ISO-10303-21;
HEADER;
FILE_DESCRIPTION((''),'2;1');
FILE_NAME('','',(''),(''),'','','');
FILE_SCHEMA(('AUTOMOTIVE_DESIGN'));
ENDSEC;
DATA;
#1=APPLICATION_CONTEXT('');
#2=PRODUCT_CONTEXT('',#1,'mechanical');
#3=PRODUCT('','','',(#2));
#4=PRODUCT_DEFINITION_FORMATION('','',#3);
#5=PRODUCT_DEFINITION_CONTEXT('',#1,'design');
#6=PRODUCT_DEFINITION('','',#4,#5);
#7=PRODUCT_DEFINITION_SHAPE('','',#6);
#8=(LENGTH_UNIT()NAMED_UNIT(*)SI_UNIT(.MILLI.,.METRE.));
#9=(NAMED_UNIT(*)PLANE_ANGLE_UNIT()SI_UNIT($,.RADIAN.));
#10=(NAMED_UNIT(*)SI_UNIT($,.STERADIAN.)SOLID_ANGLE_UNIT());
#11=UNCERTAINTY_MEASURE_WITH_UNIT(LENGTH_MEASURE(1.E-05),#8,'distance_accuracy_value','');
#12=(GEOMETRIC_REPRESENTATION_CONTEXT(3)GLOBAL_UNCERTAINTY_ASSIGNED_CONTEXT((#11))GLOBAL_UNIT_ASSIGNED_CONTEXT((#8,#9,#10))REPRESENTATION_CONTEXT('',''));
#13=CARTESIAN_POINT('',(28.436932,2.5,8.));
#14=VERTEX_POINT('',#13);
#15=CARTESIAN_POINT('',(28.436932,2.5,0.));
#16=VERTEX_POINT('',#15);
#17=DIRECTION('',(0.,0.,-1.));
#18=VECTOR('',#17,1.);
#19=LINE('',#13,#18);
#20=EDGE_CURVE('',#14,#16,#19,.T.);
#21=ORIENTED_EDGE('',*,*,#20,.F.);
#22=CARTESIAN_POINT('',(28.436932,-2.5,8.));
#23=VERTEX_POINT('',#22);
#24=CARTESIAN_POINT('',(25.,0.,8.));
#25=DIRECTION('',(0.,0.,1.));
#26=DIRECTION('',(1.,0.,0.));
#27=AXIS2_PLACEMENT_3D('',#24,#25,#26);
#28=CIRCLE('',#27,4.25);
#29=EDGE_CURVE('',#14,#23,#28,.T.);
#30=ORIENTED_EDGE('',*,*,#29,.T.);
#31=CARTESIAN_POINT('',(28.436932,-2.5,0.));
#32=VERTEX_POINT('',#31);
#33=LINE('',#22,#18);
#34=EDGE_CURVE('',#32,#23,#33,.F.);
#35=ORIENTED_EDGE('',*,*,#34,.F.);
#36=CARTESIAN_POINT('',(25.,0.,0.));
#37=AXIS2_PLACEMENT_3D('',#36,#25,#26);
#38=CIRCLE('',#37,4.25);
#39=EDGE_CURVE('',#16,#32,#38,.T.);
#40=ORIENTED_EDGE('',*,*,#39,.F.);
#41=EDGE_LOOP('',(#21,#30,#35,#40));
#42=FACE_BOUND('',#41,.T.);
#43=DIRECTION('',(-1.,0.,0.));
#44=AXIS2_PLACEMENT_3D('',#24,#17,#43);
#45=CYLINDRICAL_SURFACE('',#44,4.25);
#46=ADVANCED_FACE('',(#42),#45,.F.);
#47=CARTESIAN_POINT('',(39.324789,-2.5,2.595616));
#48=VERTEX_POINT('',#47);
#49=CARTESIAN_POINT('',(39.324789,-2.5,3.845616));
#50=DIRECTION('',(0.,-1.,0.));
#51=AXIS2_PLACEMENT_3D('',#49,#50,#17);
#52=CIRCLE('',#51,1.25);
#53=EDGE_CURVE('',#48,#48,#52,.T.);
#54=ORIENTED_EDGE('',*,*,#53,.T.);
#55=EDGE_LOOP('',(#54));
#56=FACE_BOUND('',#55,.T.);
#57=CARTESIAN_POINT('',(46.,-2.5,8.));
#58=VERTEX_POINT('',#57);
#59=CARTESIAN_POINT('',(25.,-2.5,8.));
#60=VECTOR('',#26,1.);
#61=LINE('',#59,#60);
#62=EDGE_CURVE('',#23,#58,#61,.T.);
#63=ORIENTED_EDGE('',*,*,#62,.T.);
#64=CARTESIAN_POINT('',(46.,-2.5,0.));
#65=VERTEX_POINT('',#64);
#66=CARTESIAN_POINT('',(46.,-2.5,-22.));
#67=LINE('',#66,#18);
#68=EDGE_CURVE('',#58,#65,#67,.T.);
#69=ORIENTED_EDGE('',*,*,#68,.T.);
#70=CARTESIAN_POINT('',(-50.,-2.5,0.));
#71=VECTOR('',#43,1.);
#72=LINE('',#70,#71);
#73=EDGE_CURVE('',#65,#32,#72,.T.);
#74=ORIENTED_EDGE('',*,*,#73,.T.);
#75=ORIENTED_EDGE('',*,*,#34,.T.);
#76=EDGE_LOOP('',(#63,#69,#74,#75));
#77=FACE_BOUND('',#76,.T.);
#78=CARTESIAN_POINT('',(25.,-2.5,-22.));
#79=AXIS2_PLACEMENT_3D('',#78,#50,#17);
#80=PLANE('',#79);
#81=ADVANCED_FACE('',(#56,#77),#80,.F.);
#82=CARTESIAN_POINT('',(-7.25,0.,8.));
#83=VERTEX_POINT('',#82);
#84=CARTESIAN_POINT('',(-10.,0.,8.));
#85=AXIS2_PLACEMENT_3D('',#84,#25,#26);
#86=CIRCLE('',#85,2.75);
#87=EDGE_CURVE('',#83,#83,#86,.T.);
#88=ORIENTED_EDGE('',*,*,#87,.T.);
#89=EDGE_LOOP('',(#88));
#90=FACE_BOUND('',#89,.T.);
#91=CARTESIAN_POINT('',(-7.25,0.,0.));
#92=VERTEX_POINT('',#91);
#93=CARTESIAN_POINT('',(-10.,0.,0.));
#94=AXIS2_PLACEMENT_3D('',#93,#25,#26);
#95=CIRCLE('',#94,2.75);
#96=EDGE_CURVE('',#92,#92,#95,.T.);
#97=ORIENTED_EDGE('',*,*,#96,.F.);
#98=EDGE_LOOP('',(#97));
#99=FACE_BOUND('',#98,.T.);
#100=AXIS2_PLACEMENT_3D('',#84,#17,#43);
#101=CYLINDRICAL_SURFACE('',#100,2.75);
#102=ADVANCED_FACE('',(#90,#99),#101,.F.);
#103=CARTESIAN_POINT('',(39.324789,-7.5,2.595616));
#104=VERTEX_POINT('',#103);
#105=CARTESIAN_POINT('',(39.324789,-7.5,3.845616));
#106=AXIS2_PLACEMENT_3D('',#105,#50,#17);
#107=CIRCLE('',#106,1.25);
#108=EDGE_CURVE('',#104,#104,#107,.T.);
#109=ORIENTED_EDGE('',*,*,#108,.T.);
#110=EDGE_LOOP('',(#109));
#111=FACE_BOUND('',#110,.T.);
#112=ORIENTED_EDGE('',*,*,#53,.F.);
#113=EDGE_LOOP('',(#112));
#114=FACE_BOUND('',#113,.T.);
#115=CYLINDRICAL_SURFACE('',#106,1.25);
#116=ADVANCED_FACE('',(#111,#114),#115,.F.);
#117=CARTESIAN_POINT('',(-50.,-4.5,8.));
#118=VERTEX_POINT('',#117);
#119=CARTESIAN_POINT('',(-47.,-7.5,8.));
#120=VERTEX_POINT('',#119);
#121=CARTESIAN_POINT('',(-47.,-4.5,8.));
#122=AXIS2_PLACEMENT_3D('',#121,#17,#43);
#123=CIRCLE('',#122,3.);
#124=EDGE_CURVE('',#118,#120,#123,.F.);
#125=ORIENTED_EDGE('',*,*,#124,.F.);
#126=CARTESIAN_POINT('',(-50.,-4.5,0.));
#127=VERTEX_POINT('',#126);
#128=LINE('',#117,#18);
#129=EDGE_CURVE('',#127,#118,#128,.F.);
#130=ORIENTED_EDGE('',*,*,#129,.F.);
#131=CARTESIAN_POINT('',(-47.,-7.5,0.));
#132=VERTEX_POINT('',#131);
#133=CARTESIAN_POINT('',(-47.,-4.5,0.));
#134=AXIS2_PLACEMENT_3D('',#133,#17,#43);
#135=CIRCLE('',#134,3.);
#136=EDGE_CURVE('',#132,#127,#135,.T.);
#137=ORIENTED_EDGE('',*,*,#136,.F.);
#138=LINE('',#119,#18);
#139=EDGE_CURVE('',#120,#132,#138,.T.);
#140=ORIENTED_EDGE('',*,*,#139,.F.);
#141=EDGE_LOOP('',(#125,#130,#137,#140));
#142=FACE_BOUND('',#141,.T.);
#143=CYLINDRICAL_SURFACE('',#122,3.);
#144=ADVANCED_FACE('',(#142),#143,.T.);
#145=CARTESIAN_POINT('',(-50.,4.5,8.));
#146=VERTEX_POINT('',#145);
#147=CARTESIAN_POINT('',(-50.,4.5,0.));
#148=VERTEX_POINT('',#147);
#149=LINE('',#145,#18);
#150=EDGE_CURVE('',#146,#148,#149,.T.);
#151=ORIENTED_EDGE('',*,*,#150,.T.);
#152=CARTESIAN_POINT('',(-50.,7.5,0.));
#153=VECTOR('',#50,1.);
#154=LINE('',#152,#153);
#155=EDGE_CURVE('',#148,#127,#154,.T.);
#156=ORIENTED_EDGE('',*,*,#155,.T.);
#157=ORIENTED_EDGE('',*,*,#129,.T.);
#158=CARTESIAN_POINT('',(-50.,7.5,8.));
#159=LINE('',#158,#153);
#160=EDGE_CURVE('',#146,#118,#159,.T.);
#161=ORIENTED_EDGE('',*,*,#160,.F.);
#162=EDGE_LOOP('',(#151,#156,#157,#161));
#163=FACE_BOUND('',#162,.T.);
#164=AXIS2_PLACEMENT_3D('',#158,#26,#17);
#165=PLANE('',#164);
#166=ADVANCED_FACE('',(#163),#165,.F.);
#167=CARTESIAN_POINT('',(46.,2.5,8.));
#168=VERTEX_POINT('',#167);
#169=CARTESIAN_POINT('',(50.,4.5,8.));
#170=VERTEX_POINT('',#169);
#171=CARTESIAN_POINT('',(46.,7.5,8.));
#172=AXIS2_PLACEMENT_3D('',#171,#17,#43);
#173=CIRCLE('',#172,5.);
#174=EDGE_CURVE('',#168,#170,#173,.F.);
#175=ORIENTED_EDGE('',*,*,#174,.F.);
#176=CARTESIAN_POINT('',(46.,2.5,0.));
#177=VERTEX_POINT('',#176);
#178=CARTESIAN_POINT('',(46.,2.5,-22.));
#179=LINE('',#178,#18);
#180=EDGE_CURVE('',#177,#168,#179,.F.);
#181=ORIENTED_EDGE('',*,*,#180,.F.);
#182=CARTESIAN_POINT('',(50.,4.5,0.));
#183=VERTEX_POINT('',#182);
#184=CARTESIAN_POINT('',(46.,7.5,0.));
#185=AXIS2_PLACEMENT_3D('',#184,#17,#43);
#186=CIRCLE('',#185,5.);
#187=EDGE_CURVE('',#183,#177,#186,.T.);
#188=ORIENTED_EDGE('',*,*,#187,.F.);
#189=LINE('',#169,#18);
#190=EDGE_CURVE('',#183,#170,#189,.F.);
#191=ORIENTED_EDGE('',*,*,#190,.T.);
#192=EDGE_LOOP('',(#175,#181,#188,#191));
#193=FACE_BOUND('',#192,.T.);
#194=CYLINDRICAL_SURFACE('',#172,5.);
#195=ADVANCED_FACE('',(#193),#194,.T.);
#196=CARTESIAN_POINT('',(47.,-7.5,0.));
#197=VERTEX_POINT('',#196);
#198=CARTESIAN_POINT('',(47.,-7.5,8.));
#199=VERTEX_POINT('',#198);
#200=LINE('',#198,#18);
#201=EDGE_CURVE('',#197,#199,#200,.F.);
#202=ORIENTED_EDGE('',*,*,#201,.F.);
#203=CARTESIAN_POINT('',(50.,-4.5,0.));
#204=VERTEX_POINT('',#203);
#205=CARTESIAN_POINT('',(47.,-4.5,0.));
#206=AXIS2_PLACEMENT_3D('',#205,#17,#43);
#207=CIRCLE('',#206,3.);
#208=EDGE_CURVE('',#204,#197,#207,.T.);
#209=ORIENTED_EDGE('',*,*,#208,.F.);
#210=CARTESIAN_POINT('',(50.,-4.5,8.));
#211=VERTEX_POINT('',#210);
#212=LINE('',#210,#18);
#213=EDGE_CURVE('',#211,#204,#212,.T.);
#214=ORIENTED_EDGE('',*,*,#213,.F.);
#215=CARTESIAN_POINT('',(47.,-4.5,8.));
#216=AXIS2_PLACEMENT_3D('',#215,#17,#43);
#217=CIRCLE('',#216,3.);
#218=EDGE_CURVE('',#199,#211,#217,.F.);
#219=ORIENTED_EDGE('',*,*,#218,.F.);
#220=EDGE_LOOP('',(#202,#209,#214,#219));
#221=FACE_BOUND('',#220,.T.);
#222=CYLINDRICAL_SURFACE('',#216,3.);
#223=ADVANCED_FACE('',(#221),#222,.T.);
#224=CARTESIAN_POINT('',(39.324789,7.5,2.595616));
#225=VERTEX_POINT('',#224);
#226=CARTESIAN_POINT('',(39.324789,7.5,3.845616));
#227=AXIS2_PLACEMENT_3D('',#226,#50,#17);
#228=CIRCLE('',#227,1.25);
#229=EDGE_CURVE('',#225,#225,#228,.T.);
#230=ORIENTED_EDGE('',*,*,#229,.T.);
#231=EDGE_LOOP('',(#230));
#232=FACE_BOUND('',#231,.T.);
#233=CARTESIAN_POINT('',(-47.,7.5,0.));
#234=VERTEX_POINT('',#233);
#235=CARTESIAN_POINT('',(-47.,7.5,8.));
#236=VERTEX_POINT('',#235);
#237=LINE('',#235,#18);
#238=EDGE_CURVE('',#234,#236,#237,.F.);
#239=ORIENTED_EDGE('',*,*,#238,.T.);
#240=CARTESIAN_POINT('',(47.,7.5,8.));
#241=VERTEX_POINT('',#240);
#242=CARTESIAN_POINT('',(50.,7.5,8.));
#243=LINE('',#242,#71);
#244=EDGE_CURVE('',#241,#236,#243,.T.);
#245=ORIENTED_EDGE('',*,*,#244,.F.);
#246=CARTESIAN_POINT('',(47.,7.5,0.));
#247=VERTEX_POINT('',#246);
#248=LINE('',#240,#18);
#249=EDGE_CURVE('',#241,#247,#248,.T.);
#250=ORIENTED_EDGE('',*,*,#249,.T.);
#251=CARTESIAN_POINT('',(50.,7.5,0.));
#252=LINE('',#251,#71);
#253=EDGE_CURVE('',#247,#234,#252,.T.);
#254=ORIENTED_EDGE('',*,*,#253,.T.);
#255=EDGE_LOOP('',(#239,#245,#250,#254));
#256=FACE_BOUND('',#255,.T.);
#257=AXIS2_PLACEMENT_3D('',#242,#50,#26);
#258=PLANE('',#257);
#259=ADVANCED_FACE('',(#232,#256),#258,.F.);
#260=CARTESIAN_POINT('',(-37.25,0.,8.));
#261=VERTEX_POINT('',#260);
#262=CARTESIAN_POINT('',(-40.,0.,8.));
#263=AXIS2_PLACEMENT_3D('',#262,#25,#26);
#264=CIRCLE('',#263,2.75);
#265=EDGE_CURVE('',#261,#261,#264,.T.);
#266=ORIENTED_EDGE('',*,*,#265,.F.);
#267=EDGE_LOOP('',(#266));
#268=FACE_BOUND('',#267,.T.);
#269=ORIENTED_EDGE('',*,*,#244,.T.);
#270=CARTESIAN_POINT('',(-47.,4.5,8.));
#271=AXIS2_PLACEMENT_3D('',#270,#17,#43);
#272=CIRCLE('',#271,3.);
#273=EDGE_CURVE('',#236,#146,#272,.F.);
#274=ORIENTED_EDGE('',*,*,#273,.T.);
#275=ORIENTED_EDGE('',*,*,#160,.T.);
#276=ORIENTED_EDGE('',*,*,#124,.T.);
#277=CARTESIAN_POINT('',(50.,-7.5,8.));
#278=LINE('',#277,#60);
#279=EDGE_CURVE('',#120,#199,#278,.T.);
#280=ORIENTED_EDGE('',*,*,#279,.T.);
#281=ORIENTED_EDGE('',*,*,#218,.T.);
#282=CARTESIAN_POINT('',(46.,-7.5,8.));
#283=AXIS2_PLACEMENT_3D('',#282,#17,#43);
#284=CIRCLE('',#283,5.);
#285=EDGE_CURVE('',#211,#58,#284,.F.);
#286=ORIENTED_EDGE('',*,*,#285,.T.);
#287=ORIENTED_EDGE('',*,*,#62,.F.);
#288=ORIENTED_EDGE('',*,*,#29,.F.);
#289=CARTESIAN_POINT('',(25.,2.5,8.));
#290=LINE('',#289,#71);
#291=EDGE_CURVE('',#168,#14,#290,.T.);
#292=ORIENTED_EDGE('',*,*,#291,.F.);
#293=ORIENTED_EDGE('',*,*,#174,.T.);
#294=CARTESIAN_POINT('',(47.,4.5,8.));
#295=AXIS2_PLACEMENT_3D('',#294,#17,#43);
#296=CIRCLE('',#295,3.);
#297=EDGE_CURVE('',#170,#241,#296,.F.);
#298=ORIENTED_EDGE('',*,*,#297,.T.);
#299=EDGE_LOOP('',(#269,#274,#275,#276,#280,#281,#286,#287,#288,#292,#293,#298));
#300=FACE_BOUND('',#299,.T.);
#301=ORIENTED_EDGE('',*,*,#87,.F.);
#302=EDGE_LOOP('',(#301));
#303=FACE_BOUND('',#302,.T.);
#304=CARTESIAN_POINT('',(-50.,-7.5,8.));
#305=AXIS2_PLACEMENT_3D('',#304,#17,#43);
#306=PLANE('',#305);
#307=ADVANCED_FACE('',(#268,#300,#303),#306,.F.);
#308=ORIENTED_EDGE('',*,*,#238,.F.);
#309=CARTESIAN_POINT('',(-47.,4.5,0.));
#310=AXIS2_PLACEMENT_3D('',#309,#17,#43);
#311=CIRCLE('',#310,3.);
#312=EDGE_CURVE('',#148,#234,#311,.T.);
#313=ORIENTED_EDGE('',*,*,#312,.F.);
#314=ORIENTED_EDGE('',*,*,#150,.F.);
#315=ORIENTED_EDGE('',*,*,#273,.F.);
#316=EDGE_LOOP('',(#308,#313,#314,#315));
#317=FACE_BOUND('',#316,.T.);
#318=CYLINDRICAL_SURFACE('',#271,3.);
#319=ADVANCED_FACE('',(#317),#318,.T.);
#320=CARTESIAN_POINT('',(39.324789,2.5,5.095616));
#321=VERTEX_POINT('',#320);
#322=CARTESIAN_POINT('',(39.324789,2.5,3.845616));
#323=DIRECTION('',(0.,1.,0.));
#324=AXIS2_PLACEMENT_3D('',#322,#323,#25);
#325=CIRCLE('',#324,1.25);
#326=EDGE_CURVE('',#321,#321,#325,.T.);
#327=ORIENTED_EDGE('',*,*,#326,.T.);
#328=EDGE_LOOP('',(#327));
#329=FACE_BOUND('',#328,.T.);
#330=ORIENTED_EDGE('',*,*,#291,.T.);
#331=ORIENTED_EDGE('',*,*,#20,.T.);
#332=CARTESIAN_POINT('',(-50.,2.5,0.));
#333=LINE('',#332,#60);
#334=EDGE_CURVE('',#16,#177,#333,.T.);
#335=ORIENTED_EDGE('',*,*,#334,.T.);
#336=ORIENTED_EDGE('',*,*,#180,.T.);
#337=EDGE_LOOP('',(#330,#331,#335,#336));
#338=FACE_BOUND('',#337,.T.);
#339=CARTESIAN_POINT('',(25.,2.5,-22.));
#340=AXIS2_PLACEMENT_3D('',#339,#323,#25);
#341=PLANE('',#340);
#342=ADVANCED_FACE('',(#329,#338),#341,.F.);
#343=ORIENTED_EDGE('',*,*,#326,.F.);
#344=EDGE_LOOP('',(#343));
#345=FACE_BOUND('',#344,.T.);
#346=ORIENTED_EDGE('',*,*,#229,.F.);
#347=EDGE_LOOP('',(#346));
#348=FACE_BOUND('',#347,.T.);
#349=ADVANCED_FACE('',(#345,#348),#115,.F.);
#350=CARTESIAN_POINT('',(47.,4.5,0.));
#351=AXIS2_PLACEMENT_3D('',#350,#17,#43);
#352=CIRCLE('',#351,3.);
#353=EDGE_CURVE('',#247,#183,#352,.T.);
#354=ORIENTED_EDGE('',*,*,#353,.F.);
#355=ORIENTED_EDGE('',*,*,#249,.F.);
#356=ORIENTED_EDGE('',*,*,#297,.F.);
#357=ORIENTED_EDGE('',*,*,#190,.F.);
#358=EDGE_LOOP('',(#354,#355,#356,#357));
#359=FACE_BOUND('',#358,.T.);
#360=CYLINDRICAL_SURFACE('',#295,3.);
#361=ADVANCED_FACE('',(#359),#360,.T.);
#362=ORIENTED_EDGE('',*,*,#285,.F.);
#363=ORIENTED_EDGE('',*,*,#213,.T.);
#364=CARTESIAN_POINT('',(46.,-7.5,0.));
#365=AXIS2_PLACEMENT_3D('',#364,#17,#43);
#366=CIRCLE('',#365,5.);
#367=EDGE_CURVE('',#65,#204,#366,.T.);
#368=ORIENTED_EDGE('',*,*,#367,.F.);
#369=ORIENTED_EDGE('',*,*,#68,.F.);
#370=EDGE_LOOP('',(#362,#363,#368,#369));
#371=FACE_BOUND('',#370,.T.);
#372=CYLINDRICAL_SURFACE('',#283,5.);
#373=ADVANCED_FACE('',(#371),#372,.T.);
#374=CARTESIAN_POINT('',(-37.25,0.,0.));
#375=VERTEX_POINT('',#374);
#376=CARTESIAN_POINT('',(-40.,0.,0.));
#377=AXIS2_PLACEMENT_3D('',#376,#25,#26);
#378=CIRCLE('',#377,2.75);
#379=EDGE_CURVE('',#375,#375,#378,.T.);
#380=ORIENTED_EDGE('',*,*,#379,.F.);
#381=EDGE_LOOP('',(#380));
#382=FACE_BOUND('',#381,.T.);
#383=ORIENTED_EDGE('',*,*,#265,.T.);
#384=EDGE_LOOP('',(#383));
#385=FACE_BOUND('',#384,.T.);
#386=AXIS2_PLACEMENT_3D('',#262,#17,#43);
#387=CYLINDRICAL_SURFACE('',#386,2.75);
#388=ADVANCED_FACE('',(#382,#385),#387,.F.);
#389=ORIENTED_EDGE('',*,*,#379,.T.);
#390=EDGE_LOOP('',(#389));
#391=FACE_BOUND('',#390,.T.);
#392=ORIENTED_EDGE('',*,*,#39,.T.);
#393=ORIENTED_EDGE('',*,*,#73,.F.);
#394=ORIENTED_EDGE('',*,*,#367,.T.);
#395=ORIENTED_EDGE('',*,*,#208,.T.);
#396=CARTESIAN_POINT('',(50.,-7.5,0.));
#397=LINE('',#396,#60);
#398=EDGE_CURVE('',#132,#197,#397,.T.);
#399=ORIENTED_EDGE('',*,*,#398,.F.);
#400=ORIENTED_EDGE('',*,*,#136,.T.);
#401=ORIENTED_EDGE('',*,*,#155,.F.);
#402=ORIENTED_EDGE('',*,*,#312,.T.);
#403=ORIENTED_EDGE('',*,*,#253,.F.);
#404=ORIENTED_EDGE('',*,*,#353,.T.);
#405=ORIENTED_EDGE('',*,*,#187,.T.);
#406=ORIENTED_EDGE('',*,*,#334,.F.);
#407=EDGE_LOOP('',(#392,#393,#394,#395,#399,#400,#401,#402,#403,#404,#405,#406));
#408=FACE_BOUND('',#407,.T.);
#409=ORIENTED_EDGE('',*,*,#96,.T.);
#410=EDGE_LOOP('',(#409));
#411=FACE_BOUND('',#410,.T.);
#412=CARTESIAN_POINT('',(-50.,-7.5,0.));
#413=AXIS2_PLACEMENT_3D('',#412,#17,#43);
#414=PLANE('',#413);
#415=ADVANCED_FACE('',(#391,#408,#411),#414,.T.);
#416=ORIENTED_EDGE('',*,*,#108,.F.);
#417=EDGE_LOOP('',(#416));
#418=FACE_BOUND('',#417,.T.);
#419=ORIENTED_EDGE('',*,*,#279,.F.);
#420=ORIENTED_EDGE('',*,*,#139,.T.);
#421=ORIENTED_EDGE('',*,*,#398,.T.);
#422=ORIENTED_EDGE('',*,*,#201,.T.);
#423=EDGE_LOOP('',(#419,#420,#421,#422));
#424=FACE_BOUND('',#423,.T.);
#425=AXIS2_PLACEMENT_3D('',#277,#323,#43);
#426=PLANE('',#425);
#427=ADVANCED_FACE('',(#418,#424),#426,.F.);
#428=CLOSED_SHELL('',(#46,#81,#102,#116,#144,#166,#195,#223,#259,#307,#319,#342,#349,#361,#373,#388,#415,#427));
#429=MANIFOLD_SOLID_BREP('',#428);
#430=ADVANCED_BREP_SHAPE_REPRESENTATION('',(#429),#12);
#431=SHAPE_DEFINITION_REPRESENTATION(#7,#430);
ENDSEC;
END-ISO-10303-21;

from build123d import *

# Parameters (mm, degrees)
SKIZZE1_W                       = 100
SKIZZE1_H                       = 15
SKIZZE1_R                       = 2.75
SKIZZE1_R_2                     = 4.25
AUFSATZ_LINEAR_AUSTRAGEN1_DEPTH = 8
VERRUNDUNG1_R                   = 3
SCHNITT_LINEAR_AUSTRAGEN1_DEPTH = 30
M3_GEWINDEBOHRUNG1_D            = 2.5
VERRUNDUNG2_R                   = 5


with BuildPart() as part:
    # Skizze1 → Aufsatz-Linear austragen1 (new body)
    with BuildSketch(Plane.XY):
        Rectangle(SKIZZE1_W, SKIZZE1_H)
        with Locations((-10, 0)):
            Circle(SKIZZE1_R, mode=Mode.SUBTRACT)
        with Locations((-40, 0)):
            Circle(SKIZZE1_R, mode=Mode.SUBTRACT)
        with Locations((25, 0)):
            Circle(SKIZZE1_R_2, mode=Mode.SUBTRACT)
    extrude(amount=AUFSATZ_LINEAR_AUSTRAGEN1_DEPTH)

    # Verrundung1
    verrundung1_edges = [part.edges().sort_by_distance(p)[0] for p in [
        (-50, 7.5, 4),
        (50, 7.5, 4),
        (50, -7.5, 4),
        (-50, -7.5, 4),
    ]]
    fillet(verrundung1_edges, radius=VERRUNDUNG1_R)

    # Skizze2 → Schnitt-Linear austragen1 (cut)
    with BuildSketch(Plane.XY.offset(8)):
        with BuildLine():
            Line((25, 2.5), (52.731650319, 2.5))
            ThreePointArc((52.731650319, 2.5), (55.231650319, 0), (52.731650319, -2.5))
            Line((52.731650319, -2.5), (25, -2.5))
            ThreePointArc((25, -2.5), (22.5, 0), (25, 2.5))
        make_face()
    extrude(amount=-SCHNITT_LINEAR_AUSTRAGEN1_DEPTH, mode=Mode.SUBTRACT)

    # M3 Gewindebohrung1 (through all)
    with Locations(Plane.XZ.offset(7.5)):
        with Locations((39.324789102, 3.845615986)):
            Hole(M3_GEWINDEBOHRUNG1_D / 2)

    # Verrundung2
    # the kernel refuses this fillet: 5 mm, written as the material it takes off along each edge
    with BuildSketch(Plane(origin=(50, -2.5, 18), x_dir=(-1, 0, 0), z_dir=(0, 0, -1))) as verrundung2_piece_1:
        with BuildLine():
            CenterArc((4, -5), VERRUNDUNG2_R, 90, 53.130102354)
            Line((0, -2), (-0.08, -1.94))
            ThreePointArc((-0.08, -1.94), (-0.1, -1), (-0.1, 0))
            Line((-0.1, 0), (0, 0.1))
            Line((0, 0.1), (4, 0.1))
            Line((4, 0.1), (4, 0))
        make_face()
    extrude(amount=28, mode=Mode.SUBTRACT)
    with BuildSketch(Plane(origin=(50, 2.5, -10), x_dir=(0, 1, 0), z_dir=(0, 0, 1))) as verrundung2_piece_2:
        with BuildLine():
            CenterArc((5, 4), VERRUNDUNG2_R, 180, 53.130102354)
            Line((0, 4), (-0.1, 4))
            Line((-0.1, 4), (-0.1, 0))
            Line((-0.1, 0), (0, -0.1))
            ThreePointArc((0, -0.1), (1, -0.1), (1.94, -0.08))
            Line((1.94, -0.08), (2, 0))
        make_face()
    extrude(amount=28, mode=Mode.SUBTRACT)


solid = part.part
